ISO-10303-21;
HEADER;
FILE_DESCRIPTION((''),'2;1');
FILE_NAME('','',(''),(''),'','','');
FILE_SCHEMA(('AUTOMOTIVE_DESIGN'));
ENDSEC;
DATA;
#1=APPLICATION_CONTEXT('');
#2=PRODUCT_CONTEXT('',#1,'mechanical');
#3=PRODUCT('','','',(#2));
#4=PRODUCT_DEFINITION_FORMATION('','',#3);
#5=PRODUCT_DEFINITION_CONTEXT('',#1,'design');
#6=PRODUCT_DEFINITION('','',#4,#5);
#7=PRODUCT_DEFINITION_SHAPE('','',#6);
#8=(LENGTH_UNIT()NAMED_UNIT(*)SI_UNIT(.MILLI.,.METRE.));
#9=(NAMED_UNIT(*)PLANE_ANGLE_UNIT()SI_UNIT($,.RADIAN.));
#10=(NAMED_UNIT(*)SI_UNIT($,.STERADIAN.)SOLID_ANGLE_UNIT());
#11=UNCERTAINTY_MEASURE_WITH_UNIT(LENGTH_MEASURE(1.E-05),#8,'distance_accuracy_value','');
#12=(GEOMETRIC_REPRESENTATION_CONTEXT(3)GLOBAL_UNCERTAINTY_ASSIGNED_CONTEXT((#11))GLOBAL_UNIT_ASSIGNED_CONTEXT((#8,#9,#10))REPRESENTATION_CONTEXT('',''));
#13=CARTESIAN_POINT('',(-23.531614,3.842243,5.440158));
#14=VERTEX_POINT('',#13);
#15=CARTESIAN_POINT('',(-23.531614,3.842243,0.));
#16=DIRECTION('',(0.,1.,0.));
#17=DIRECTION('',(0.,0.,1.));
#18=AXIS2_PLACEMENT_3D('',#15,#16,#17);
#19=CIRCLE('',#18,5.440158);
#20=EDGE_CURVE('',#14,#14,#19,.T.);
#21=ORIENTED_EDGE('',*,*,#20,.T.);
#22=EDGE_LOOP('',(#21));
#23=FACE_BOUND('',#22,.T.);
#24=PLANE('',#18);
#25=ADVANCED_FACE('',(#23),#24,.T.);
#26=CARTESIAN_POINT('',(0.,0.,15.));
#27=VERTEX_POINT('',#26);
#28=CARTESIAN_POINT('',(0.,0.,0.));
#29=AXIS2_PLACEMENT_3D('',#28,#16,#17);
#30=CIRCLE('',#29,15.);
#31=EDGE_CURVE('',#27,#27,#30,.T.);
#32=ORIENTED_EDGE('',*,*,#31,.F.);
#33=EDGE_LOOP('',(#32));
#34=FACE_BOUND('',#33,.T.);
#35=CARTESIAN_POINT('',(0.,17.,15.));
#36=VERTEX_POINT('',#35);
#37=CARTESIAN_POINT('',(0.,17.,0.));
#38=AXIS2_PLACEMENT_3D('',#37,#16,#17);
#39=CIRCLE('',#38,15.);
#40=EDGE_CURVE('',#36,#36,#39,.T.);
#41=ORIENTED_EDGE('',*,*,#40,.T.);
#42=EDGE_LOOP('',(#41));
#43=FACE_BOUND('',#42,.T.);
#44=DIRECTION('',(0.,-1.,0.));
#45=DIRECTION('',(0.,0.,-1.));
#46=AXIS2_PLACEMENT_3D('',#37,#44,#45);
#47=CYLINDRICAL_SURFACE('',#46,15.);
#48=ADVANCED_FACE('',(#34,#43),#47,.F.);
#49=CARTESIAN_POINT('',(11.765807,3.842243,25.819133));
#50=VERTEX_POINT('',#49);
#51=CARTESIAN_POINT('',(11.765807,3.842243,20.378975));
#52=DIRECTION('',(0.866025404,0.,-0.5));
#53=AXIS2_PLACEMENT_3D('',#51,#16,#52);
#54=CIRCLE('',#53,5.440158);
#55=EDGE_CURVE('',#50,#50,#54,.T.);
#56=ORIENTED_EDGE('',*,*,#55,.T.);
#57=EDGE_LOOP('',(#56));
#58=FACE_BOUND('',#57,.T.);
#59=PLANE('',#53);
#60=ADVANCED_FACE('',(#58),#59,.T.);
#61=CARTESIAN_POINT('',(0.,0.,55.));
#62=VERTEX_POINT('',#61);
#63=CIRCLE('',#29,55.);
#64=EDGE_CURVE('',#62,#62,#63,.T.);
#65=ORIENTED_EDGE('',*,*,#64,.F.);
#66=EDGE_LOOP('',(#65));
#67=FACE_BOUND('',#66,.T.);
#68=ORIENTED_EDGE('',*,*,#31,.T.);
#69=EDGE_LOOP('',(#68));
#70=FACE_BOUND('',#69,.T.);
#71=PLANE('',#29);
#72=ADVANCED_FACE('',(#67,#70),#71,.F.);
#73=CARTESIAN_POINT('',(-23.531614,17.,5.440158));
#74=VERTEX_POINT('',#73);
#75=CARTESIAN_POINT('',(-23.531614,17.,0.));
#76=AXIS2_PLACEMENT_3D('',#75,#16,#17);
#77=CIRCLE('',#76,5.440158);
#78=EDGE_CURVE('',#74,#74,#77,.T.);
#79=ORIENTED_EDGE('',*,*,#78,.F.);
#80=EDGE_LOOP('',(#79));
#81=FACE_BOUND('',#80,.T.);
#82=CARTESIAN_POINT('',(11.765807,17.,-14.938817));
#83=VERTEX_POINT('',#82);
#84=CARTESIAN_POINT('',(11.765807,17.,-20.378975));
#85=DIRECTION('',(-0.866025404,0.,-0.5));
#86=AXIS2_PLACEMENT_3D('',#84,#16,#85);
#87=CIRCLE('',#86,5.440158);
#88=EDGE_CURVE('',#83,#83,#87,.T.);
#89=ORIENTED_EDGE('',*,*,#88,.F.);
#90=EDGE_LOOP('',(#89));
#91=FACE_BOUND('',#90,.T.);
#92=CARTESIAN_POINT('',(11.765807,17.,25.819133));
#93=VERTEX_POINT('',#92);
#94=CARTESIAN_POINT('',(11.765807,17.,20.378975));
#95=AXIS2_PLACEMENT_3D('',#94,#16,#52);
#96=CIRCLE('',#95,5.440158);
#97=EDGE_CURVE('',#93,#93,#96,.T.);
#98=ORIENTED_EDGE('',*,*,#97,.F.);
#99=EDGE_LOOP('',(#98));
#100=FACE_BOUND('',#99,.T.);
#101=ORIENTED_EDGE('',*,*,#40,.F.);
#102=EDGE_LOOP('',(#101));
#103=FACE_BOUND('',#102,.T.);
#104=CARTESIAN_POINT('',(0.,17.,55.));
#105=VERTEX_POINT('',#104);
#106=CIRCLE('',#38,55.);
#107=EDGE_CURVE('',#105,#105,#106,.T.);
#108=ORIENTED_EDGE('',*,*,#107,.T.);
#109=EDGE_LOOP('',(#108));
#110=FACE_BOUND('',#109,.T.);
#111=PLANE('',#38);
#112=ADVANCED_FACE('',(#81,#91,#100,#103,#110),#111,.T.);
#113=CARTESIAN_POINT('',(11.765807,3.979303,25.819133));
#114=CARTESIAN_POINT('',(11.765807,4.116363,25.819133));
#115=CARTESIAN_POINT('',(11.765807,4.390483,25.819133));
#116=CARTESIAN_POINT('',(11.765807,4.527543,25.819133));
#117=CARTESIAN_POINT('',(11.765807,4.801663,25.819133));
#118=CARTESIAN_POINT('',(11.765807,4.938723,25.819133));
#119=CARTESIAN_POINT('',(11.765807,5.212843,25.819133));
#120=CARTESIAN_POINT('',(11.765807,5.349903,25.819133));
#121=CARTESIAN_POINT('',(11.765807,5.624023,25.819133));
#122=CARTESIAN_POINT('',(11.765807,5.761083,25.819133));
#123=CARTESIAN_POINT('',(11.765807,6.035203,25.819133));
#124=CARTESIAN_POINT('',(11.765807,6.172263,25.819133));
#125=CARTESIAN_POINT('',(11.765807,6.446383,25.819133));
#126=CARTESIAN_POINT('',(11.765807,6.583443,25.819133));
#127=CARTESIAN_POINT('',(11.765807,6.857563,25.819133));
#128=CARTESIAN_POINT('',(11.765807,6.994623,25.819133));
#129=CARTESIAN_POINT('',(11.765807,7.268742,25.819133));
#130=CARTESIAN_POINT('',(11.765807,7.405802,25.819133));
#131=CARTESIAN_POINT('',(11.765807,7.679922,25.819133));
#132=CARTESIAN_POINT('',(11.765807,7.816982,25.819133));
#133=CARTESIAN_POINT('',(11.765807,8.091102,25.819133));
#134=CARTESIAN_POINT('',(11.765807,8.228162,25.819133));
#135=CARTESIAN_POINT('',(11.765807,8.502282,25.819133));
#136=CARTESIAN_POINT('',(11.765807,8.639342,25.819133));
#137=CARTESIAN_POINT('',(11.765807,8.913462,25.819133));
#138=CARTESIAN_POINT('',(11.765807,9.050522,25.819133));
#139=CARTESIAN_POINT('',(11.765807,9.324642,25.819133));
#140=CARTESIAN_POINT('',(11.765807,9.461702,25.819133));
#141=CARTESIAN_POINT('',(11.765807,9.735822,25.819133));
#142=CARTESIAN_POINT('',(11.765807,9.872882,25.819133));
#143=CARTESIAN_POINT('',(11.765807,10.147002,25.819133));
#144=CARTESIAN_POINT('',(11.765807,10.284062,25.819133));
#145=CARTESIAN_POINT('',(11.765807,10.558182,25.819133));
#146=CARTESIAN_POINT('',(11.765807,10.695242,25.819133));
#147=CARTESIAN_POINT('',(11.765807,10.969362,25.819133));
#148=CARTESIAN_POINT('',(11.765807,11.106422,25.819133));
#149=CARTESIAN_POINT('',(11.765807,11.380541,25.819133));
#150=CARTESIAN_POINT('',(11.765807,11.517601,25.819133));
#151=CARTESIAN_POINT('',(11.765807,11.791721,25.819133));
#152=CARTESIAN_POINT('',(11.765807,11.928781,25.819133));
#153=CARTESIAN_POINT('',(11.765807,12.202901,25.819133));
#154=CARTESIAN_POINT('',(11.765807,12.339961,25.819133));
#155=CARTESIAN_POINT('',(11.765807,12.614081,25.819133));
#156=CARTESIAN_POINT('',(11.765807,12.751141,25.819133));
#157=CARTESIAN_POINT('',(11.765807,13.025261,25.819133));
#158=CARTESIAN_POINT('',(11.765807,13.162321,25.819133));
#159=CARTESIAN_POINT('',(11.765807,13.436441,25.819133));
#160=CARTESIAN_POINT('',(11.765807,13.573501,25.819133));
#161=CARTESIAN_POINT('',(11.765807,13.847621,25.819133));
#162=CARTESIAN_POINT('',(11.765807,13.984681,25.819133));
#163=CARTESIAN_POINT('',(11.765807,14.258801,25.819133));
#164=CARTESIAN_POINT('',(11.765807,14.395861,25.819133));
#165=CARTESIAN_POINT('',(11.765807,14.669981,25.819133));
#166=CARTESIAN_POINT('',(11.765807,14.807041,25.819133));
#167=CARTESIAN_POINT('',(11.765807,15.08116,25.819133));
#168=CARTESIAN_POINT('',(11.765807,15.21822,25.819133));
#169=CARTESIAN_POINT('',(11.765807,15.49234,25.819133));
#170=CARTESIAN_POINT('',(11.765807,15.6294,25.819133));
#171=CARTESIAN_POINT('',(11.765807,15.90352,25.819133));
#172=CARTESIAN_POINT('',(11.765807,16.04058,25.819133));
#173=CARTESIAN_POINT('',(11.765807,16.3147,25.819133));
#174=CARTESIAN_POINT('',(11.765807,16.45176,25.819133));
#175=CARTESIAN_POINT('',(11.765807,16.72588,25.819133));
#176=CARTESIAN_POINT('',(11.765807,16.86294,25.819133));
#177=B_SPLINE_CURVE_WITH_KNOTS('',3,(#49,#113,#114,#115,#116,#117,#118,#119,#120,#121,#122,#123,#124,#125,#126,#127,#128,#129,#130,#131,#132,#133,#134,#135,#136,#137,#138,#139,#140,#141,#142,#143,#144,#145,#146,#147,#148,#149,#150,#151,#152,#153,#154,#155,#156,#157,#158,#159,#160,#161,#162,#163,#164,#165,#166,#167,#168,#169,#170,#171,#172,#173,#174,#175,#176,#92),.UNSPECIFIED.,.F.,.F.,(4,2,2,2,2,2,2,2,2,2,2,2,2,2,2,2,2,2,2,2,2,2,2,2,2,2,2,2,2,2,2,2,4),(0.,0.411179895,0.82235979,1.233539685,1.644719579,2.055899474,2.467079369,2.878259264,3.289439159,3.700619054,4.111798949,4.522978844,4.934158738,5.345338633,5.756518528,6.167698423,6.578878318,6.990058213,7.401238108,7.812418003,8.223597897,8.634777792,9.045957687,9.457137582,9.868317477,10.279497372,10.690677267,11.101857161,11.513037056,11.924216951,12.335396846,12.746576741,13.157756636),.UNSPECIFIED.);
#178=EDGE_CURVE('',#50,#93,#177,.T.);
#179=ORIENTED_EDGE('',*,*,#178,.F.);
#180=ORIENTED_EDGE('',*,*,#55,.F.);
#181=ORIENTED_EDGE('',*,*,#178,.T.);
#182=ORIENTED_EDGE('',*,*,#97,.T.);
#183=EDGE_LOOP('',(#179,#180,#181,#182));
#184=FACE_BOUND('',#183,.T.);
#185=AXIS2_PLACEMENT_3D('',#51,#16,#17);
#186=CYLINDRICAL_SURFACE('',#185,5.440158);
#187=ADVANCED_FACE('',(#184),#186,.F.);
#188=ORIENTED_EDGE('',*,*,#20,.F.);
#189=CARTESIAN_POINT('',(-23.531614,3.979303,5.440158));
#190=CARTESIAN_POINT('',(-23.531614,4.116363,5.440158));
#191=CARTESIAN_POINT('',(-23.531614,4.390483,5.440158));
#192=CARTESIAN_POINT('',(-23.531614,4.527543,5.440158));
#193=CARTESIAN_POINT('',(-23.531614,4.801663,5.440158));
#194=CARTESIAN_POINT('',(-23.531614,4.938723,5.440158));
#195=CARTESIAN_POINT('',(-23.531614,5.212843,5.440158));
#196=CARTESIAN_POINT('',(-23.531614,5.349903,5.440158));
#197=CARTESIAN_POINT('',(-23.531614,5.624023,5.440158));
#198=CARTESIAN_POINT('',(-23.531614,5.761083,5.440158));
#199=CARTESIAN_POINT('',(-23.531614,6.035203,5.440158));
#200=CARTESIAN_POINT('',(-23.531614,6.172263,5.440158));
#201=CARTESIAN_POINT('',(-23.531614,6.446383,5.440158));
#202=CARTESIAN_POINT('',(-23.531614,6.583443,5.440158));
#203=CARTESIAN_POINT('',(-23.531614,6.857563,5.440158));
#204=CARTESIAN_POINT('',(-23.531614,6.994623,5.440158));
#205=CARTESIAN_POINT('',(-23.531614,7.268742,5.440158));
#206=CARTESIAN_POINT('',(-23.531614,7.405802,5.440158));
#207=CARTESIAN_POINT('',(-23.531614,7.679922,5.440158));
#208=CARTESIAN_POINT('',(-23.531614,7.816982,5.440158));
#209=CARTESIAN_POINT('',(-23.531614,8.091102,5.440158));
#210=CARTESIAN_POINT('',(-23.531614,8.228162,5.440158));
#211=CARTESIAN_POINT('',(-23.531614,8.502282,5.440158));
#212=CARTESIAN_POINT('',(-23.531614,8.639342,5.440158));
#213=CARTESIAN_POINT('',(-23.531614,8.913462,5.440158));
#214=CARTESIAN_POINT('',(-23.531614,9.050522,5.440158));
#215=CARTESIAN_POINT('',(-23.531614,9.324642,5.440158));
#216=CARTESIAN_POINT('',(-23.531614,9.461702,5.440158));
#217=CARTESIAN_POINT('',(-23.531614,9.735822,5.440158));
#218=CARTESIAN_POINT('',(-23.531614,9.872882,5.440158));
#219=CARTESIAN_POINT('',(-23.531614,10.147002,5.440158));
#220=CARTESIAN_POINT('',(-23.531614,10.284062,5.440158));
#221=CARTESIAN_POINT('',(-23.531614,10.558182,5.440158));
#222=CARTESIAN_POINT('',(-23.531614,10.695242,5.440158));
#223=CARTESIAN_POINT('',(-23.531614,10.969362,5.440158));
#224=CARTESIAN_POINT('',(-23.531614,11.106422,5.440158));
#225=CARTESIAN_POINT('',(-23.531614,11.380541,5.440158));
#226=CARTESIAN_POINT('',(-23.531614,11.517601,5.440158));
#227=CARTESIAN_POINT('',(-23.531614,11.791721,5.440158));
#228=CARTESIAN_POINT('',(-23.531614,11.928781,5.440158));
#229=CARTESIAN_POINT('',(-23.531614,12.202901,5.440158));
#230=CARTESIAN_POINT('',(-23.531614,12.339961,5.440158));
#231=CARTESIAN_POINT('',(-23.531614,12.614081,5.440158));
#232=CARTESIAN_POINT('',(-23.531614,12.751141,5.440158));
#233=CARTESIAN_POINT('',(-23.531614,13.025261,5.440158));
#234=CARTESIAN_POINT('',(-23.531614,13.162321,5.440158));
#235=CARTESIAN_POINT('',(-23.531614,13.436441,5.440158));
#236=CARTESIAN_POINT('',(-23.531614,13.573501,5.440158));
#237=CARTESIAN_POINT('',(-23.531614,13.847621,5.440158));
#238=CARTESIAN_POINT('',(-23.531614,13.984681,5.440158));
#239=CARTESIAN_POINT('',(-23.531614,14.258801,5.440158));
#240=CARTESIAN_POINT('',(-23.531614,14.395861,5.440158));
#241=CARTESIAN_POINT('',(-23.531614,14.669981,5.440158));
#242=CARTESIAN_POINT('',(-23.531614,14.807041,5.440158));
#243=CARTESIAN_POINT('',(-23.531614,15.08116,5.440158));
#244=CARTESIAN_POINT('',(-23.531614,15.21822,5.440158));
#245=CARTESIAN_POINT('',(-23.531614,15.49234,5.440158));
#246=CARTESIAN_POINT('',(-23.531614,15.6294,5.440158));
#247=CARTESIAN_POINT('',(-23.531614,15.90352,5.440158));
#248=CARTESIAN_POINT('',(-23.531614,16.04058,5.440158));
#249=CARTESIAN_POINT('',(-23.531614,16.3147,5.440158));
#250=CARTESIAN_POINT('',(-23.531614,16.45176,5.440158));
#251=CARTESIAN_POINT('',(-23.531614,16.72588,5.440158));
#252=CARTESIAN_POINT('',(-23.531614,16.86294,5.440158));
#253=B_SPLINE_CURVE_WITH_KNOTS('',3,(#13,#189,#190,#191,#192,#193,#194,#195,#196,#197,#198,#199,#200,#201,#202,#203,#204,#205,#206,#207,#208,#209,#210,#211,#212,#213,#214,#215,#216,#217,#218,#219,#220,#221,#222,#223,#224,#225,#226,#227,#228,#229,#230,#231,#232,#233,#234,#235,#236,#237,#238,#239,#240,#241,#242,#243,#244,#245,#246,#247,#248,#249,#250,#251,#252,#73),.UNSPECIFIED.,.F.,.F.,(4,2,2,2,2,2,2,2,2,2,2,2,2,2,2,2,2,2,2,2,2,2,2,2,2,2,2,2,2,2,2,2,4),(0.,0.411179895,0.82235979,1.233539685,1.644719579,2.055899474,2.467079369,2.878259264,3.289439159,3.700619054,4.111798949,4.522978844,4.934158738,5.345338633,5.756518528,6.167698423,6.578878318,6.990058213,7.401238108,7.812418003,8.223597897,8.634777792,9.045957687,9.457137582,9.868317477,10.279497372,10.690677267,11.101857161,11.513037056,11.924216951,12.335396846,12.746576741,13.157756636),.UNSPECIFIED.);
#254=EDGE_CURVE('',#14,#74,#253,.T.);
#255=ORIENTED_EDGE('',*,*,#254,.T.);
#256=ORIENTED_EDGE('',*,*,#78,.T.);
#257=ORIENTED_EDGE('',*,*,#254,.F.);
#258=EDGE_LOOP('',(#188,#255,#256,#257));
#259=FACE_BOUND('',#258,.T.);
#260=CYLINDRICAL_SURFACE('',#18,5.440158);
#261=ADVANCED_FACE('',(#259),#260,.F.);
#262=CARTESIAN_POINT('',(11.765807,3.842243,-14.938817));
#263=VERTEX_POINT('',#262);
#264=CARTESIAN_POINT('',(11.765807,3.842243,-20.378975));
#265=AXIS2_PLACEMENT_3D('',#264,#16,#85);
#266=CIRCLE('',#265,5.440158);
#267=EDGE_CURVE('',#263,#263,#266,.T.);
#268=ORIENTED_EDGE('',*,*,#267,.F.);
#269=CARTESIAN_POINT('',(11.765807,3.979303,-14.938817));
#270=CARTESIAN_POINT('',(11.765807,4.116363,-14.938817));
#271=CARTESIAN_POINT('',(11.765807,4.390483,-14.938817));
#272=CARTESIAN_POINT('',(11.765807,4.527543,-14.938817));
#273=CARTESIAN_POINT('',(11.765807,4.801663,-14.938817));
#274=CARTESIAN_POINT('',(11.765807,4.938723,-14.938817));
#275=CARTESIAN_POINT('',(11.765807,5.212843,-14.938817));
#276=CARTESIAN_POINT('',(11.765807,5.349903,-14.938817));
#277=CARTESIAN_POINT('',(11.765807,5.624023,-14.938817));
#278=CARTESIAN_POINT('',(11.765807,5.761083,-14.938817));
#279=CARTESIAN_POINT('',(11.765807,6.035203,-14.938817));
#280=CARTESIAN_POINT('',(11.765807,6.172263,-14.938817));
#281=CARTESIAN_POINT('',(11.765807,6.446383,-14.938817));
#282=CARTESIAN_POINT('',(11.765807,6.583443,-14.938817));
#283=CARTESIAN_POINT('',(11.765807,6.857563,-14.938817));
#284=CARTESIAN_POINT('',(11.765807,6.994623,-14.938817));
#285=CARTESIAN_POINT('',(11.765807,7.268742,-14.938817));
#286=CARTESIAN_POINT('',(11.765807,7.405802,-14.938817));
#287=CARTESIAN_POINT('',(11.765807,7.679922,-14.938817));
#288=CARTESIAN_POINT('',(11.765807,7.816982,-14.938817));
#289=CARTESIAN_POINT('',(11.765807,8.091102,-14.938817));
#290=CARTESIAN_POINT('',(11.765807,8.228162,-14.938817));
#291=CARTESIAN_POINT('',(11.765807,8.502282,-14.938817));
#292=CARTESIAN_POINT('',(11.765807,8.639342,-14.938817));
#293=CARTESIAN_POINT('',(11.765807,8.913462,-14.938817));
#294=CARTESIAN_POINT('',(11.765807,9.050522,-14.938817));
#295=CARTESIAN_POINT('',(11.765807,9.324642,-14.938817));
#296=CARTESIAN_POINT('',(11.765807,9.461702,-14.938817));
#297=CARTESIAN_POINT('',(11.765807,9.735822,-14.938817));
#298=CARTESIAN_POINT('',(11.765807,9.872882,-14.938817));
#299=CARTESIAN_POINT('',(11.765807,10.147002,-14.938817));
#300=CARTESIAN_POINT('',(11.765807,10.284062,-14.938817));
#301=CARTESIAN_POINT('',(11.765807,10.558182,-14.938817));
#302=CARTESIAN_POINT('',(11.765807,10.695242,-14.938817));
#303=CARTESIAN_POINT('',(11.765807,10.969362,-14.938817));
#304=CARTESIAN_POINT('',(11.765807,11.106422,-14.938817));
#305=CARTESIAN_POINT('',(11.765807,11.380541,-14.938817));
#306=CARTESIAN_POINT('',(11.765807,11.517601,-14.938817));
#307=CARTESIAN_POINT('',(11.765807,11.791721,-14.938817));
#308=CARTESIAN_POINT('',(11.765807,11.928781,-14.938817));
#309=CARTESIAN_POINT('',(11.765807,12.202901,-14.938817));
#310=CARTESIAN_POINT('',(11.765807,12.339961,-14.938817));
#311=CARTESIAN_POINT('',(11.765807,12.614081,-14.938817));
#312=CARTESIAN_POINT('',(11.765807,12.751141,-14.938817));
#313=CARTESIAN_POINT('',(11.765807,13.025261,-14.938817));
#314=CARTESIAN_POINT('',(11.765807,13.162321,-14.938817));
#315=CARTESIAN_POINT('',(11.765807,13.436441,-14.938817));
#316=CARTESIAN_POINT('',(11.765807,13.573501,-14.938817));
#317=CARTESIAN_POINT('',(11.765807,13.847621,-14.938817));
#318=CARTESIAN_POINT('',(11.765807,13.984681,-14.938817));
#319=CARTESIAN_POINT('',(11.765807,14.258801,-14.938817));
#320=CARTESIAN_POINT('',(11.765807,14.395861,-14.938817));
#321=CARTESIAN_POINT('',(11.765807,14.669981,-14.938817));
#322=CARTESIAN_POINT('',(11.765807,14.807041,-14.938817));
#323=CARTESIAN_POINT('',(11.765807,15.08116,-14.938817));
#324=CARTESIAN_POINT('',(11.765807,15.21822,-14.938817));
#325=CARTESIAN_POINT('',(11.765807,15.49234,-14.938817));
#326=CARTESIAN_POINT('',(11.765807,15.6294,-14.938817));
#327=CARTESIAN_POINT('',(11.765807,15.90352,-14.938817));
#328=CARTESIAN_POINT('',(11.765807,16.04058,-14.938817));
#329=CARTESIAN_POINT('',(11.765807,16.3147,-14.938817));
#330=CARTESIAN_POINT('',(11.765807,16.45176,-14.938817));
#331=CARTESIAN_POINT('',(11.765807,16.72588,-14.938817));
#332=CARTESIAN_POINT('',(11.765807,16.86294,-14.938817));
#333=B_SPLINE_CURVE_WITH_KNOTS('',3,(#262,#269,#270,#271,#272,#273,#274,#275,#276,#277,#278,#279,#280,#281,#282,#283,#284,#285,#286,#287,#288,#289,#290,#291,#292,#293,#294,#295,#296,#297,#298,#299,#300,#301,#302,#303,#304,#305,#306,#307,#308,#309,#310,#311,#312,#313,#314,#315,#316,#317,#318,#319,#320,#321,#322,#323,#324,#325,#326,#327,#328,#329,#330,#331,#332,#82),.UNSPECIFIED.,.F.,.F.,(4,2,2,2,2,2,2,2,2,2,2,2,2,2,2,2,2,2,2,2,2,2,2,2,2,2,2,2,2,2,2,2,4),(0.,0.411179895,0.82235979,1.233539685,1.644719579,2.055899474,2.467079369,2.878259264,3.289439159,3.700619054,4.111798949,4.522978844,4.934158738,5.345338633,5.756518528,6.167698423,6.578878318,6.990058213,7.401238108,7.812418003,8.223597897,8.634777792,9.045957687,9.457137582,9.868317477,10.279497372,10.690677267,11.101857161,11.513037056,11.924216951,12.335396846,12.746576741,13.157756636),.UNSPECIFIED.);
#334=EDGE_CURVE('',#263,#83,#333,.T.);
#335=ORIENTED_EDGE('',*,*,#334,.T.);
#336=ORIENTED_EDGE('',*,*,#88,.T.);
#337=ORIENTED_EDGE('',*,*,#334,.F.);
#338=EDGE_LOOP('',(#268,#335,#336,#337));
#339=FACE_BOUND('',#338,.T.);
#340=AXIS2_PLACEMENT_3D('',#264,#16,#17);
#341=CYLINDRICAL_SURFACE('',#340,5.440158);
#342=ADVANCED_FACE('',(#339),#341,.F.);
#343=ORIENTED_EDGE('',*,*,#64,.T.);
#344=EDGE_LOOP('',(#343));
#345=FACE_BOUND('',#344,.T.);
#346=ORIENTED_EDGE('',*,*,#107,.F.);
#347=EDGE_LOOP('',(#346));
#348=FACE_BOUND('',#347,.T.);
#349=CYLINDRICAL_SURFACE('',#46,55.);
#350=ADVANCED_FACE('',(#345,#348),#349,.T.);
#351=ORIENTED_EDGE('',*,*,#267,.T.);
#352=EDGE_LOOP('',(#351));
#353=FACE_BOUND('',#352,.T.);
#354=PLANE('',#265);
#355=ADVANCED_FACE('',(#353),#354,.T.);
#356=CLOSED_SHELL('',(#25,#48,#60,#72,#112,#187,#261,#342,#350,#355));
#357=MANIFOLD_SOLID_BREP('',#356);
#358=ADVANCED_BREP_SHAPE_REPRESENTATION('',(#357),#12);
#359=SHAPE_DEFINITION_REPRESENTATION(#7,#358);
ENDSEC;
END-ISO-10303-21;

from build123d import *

# Parameters (mm, degrees)
SKETCH1_R           = 55
BOSS_EXTRUDE1_DEPTH = 17
SKETCH2_R           = 15
CUT_EXTRUDE1_DEPTH  = 80.617837197
SKETCH3_R           = 5.440158161
CUT_EXTRUDE2_DEPTH  = 13.157756636
CIRPATTERN1_COUNT   = 3


with BuildPart() as part:
    # Sketch1 → Boss-Extrude1 (new body)
    with BuildSketch(Plane(origin=(0, 0, 0), x_dir=(1, 0, 0), z_dir=(0, 1, 0))):
        Circle(SKETCH1_R)
    extrude(amount=BOSS_EXTRUDE1_DEPTH)

    # Sketch2 → Cut-Extrude1 (cut, through all)
    with BuildSketch(Plane(origin=(0, 0, 0), x_dir=(1, 0, 0), z_dir=(0, 1, 0))):
        Circle(SKETCH2_R)
    extrude(amount=CUT_EXTRUDE1_DEPTH, mode=Mode.SUBTRACT)

    # Sketch3 → Cut-Extrude2 (cut)
    with BuildSketch(Plane(origin=(0, 17, 0), x_dir=(1, 0, 0), z_dir=(0, 1, 0))):
        with Locations((-23.531613664, 0)):
            Circle(SKETCH3_R)
    cut_extrude2 = extrude(amount=-CUT_EXTRUDE2_DEPTH, mode=Mode.SUBTRACT)

    # CirPattern1: Cut-Extrude2 ×3 about axis
    cirpattern1_axis = Axis((0, 0, 0), (0, 1, 0))
    for i in range(1, CIRPATTERN1_COUNT):
        add(cut_extrude2.rotate(cirpattern1_axis, i * 360 / CIRPATTERN1_COUNT), mode=Mode.SUBTRACT)


solid = part.part
